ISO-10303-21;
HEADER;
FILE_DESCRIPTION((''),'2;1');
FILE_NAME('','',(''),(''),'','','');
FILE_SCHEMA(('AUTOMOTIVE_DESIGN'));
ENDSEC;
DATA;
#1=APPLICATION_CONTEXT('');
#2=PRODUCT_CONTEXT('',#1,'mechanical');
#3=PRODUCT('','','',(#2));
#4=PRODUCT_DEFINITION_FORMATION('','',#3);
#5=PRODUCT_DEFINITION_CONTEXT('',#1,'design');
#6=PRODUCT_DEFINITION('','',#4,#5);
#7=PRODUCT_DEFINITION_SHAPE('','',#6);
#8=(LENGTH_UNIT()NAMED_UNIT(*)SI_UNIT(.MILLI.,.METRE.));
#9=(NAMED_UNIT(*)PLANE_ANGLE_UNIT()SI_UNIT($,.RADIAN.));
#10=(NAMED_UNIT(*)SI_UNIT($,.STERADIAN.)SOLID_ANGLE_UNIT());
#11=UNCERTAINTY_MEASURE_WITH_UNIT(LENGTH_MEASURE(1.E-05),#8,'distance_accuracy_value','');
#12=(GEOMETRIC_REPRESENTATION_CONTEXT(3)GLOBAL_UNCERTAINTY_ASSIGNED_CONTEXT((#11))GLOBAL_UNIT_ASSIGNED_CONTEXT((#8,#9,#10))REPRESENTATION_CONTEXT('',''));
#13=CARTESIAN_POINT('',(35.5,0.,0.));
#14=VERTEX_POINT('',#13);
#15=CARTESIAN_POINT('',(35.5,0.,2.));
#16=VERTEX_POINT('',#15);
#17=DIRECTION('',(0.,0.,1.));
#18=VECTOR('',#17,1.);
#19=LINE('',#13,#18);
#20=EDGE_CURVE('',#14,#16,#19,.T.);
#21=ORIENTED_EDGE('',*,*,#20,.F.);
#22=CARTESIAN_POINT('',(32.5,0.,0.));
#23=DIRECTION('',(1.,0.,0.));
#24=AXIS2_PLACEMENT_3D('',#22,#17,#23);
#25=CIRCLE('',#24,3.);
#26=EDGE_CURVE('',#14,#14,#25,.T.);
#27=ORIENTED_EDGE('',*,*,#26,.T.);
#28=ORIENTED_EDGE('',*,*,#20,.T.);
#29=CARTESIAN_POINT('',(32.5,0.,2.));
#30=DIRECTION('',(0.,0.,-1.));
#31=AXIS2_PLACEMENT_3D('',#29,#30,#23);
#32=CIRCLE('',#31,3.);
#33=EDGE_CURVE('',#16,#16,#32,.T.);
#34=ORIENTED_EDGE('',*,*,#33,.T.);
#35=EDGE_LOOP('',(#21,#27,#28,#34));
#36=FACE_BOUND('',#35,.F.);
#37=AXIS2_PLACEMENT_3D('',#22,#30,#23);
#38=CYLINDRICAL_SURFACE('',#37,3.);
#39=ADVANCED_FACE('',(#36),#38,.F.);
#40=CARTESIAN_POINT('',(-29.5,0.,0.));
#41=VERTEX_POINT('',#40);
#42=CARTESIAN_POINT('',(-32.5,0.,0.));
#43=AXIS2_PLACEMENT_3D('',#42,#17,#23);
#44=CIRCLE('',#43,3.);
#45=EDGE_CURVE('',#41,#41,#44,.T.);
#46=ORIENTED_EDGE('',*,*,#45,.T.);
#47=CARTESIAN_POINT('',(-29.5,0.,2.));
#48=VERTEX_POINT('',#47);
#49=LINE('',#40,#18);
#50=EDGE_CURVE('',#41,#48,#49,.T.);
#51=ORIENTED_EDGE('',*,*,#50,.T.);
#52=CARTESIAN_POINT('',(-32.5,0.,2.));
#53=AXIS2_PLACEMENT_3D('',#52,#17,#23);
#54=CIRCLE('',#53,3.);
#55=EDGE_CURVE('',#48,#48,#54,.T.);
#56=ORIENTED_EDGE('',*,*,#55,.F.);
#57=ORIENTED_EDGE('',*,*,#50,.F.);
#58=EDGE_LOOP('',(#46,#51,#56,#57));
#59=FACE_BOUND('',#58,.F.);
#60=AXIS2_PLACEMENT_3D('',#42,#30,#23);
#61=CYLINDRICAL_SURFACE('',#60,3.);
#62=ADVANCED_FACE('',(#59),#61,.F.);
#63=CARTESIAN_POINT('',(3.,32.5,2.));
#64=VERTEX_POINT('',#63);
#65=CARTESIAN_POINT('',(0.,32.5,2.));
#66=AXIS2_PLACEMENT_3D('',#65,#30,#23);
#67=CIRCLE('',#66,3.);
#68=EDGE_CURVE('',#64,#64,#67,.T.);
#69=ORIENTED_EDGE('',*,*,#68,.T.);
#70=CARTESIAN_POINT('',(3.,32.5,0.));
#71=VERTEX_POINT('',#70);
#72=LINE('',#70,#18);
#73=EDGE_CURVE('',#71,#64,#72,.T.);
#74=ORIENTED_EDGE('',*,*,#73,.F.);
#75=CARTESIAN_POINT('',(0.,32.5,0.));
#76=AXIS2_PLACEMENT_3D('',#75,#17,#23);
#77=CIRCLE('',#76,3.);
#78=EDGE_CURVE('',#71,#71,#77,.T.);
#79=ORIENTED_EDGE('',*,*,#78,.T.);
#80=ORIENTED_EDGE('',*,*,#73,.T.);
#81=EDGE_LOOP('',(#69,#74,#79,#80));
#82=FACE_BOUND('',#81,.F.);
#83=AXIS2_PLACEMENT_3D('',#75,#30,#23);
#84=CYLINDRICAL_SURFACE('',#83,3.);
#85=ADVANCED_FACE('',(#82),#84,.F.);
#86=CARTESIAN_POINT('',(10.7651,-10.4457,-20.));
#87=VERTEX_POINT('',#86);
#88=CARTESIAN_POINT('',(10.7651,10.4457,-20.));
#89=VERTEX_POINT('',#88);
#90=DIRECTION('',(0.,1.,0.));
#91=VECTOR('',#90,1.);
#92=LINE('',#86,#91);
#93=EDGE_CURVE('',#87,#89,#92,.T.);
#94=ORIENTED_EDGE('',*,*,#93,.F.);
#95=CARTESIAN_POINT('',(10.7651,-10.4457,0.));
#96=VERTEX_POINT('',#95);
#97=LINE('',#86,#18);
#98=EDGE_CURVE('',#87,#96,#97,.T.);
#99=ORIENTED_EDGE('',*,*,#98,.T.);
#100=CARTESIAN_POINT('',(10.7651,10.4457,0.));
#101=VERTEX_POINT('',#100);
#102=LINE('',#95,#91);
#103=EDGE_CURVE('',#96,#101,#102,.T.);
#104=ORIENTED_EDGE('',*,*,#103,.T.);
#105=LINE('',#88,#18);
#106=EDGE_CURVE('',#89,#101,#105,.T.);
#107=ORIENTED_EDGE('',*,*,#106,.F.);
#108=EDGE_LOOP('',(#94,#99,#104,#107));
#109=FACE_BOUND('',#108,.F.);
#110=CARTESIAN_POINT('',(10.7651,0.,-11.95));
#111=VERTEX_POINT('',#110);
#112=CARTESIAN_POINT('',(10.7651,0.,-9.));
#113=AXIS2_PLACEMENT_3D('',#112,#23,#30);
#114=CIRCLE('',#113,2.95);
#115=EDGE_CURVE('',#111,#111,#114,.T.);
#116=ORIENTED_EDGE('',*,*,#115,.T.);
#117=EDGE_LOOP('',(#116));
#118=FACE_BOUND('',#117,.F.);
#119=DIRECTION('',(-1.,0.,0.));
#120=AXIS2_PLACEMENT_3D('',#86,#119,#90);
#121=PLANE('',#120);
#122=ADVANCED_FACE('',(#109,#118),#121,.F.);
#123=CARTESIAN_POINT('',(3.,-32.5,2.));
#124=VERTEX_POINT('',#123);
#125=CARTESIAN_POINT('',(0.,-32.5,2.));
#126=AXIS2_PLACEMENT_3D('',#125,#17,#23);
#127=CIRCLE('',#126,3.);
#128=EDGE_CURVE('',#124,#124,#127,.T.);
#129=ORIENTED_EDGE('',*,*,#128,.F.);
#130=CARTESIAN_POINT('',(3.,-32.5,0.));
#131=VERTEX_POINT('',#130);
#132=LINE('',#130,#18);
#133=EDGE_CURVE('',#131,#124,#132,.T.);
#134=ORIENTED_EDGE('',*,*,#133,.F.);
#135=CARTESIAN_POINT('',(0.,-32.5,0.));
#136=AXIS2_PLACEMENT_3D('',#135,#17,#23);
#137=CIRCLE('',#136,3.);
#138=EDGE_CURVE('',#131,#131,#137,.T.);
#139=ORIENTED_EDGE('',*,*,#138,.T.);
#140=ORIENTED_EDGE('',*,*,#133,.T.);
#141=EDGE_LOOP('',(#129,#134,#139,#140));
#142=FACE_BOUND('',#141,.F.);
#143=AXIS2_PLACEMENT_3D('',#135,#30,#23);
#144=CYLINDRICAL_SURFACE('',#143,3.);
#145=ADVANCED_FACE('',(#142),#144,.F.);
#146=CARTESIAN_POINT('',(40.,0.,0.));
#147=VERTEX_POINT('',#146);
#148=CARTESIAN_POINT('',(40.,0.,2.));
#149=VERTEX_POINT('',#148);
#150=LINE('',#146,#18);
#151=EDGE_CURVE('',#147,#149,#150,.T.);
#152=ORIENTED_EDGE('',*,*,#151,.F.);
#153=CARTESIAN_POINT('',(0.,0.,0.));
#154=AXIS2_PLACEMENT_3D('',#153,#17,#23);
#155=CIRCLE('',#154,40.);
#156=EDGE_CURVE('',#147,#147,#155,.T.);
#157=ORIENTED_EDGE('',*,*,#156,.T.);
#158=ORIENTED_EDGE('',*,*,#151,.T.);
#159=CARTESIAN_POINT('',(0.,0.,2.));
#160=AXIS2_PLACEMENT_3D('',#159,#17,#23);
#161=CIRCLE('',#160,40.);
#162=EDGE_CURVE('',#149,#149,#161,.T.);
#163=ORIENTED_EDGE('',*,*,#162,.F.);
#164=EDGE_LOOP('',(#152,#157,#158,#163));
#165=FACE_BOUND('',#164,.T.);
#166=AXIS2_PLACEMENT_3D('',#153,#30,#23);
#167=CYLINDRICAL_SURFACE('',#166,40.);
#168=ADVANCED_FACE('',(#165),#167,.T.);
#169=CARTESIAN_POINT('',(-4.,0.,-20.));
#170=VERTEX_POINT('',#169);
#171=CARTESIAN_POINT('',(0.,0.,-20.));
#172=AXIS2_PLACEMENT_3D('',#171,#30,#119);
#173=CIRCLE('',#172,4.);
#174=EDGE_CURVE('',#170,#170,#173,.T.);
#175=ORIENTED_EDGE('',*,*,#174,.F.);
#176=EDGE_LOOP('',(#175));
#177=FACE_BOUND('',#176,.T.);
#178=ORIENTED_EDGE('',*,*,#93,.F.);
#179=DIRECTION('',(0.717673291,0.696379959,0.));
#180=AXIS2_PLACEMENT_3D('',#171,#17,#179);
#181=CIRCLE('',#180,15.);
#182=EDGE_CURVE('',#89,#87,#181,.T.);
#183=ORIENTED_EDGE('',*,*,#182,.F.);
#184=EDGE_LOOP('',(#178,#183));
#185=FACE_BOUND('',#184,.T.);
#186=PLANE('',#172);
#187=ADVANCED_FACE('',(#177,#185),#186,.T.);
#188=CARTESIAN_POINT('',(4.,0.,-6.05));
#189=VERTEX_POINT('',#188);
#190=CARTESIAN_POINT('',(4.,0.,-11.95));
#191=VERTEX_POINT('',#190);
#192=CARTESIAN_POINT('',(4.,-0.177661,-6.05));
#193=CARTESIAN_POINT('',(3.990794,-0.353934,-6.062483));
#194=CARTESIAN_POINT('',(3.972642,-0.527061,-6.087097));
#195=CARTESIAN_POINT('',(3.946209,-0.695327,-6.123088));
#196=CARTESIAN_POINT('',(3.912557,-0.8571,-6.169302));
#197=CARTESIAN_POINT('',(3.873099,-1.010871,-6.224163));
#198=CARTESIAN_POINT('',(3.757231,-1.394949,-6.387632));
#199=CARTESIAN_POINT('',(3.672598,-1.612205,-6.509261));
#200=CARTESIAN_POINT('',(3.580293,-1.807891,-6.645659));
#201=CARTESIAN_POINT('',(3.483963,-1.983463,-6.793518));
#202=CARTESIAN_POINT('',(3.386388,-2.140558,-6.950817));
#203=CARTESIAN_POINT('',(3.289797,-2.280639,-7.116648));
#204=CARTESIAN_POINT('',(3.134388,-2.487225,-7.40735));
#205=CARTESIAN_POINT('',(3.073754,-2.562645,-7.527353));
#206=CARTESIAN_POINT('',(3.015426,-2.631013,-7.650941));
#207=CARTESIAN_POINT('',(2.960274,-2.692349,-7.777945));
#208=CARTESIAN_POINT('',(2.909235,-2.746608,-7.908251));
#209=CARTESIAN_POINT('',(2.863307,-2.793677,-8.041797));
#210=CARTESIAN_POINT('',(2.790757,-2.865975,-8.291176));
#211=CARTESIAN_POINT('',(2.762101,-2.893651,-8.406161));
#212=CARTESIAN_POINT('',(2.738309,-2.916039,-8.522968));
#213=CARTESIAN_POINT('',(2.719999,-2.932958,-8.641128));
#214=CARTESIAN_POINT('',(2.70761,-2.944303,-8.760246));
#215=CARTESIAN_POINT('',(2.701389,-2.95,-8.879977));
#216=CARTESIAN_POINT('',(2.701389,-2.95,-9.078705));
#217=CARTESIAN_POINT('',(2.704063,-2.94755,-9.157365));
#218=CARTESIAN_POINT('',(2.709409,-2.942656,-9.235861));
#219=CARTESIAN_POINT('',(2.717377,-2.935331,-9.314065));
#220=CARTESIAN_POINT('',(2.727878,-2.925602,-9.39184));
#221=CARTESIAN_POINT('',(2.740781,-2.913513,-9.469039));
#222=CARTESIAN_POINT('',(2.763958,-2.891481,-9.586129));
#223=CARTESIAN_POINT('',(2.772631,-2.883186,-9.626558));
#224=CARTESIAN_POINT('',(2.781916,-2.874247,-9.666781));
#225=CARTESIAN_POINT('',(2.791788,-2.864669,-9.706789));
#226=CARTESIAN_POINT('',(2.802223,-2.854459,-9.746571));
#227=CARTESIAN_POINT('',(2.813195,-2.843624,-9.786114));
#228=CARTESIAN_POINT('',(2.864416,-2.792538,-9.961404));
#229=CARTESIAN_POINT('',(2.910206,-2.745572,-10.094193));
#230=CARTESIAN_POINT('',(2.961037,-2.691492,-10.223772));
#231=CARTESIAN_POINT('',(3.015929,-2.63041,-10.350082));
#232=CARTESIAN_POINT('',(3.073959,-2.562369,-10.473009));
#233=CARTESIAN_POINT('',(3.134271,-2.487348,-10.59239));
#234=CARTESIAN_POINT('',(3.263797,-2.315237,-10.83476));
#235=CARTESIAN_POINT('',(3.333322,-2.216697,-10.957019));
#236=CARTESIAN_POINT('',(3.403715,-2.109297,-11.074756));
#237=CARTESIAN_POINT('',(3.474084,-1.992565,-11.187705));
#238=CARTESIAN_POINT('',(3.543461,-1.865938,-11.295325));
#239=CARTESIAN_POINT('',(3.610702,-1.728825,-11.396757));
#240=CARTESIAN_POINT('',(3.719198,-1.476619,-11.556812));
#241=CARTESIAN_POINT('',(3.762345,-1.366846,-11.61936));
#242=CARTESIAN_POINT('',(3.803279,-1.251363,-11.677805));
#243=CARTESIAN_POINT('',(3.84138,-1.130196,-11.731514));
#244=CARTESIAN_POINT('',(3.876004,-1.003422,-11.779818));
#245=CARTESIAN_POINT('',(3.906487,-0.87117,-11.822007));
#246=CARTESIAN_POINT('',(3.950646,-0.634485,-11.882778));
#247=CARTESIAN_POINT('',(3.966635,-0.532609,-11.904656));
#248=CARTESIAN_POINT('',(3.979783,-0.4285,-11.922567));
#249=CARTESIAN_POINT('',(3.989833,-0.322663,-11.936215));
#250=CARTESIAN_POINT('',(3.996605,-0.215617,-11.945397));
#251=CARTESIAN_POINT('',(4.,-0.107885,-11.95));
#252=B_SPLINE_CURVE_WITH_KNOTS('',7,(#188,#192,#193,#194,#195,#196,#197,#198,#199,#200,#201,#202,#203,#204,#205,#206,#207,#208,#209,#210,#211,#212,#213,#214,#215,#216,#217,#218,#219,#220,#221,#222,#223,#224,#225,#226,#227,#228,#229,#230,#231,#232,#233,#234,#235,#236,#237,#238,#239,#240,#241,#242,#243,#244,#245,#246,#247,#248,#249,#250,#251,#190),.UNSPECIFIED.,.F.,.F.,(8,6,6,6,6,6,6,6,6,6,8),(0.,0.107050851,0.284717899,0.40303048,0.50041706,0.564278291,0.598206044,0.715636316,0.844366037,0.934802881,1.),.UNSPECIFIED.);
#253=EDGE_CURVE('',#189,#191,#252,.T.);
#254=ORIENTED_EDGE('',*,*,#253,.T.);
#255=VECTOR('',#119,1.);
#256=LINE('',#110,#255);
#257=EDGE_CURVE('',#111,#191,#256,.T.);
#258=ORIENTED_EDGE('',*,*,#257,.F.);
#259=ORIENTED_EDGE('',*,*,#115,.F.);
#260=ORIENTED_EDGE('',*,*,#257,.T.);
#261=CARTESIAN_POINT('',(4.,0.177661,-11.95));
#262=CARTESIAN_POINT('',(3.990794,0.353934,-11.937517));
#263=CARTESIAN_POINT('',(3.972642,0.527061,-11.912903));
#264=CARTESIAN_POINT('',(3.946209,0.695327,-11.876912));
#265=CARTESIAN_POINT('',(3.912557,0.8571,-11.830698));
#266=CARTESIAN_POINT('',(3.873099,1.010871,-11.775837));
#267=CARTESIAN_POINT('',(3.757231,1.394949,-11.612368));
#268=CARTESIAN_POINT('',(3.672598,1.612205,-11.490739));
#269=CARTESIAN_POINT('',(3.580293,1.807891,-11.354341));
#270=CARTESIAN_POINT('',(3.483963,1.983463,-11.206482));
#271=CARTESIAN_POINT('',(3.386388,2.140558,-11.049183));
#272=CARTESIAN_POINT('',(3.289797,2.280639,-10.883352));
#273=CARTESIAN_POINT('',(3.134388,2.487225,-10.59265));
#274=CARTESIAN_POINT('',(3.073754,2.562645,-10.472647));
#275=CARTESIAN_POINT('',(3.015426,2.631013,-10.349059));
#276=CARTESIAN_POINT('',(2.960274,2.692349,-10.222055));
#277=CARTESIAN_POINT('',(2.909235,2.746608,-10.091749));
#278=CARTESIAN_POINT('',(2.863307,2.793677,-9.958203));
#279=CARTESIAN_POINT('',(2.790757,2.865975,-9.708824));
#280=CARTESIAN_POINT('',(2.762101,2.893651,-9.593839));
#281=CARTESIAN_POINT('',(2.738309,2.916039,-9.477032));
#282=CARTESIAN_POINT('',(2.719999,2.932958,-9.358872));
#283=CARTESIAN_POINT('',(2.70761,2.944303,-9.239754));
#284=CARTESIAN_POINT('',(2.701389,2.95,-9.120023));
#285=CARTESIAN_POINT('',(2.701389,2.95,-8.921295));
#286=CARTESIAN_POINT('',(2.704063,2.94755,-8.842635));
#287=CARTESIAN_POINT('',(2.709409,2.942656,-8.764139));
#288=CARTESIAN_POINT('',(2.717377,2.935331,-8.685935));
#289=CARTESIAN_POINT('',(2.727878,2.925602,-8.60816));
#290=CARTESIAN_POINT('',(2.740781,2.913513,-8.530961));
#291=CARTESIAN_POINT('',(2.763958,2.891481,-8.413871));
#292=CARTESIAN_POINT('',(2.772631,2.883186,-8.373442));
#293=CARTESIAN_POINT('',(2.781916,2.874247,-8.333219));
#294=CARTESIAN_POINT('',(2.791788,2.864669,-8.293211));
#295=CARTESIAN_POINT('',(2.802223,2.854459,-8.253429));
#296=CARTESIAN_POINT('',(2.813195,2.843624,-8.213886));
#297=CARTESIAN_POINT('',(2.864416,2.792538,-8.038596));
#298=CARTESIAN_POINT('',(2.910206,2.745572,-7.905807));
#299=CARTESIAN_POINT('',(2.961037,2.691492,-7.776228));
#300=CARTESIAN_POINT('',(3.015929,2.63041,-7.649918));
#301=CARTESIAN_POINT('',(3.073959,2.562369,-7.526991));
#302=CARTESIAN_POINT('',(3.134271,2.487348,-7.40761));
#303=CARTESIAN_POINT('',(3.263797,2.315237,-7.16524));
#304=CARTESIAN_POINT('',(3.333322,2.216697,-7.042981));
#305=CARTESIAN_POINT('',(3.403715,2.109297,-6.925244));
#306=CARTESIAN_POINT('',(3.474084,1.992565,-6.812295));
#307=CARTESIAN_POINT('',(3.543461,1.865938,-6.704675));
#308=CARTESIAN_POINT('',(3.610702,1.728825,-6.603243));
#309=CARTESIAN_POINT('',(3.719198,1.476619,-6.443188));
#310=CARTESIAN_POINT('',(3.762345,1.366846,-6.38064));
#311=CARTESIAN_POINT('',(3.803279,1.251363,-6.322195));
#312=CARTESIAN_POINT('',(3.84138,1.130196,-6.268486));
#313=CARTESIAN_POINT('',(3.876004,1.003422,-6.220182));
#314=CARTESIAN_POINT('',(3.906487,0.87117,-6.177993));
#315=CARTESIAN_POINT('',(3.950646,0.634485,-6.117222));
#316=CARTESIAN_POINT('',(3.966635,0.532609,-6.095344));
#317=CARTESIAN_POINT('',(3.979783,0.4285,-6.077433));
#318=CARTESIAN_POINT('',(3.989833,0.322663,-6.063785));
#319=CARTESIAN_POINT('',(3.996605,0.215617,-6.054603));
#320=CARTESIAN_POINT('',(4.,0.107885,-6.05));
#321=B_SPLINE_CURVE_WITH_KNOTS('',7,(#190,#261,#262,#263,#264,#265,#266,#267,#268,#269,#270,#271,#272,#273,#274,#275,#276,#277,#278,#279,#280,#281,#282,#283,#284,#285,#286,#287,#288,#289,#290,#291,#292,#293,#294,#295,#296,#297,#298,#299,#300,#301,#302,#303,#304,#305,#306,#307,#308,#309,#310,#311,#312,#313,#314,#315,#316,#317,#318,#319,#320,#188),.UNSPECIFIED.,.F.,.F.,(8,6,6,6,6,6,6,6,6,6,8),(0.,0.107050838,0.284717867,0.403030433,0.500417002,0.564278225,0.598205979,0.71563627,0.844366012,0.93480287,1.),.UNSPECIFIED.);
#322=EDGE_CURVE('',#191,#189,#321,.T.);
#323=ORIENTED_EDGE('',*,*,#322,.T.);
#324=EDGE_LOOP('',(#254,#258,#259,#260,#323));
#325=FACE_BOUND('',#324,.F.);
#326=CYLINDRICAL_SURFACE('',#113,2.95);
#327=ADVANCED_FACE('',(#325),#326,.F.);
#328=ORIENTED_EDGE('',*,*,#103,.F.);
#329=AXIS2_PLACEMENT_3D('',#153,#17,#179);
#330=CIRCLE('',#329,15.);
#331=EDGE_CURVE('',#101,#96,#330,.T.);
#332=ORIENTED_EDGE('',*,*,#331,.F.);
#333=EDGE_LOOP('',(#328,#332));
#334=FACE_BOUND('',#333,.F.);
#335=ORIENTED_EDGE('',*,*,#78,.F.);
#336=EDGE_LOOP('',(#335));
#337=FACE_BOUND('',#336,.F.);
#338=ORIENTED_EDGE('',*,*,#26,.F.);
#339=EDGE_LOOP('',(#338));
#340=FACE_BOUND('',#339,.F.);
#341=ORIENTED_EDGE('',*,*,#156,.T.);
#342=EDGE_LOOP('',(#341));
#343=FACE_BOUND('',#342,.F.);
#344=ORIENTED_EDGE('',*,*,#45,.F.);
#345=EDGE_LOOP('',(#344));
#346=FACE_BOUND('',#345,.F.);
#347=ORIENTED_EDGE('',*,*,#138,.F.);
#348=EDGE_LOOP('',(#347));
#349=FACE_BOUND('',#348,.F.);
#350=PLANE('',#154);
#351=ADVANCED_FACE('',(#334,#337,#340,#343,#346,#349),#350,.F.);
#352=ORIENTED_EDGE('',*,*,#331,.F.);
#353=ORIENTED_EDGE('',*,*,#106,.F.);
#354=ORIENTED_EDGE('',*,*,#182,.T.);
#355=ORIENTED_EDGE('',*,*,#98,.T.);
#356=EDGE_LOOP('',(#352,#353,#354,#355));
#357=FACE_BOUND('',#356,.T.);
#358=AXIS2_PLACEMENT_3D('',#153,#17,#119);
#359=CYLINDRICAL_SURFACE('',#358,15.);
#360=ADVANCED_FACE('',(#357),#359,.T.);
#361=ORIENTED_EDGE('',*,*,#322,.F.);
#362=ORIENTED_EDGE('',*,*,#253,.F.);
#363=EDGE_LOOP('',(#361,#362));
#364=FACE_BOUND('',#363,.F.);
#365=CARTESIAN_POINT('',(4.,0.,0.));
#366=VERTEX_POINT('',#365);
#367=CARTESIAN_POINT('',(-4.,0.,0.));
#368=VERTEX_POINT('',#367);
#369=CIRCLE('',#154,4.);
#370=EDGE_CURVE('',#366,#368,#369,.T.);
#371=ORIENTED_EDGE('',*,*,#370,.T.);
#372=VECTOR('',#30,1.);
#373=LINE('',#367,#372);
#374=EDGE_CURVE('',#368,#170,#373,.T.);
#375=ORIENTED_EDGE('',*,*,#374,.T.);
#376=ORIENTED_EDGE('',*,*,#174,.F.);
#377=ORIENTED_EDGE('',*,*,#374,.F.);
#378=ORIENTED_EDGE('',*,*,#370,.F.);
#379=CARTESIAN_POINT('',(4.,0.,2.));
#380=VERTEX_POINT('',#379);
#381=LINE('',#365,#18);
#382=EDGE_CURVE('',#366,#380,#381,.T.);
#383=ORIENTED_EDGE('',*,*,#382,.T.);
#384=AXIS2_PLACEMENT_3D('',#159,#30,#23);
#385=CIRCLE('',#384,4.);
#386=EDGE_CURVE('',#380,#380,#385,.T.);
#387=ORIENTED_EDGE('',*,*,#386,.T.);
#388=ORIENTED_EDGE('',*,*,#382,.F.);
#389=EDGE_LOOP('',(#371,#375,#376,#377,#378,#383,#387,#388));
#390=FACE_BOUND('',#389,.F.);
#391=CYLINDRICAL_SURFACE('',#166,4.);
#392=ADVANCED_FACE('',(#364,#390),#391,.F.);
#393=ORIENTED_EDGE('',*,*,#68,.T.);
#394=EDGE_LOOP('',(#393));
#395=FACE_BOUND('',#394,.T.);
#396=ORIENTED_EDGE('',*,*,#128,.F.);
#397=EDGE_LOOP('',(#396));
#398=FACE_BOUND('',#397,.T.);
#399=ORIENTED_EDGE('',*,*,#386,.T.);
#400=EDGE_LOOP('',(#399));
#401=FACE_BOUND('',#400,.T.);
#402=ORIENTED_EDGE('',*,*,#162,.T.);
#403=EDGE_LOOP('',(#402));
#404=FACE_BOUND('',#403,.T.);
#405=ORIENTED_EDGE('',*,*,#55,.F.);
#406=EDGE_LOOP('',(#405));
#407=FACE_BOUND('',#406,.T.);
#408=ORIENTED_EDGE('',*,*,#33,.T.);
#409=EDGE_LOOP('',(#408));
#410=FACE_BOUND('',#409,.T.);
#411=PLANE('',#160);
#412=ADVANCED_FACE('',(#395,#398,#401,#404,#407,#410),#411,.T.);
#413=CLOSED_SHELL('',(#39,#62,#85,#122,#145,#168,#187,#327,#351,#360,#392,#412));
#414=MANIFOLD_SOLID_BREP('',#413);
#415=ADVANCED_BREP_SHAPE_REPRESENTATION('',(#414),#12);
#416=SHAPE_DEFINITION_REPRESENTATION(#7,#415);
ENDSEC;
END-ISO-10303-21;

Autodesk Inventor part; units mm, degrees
ref_plane "YZ Plane" through (0, 0, 0) normal (1, 0, 0) x (0, 1, 0)
ref_plane "XZ Plane" through (0, 0, 0) normal (0, 1, 0) x (-1, 0, 0)
ref_plane "XY Plane" through (0, 0, 0) normal (0, 0, 1) x (1, 0, 0)
sketch "Sketch1" plane through (0, 0, 0) normal (0, 0, 1) x (1, 0, 0)
  circle A0 centre (0, 0) radius 40
  line L0 (0, 0) -> (32.5, 0)
  line L1 (0, 0) -> (0, 32.5)
  circle A1 centre (0, 32.5) radius 3
  circle A2 centre (32.5, 0) radius 3
  circle A3 centre (0, -32.5) radius 3
  circle A4 centre (-32.5, 0) radius 3
  circle A5 centre (0, 0) radius 4
  dimension "d0" = 80
  dimension "d1" = 32.5
  dimension "d2" = 32.5
  dimension "d3" = 6
  dimension "d4" = 6
  dimension "d5" = 8
extrude "Extrusion1" add sketch "Sketch1" along normal blind 2
sketch "Sketch2" plane through (0, 0, 0) normal (0, 0, -1) x (-1, 0, 0)
  circle A0 centre (0, 0) radius 4 projected
  circle A1 centre (0, 0) radius 15
  dimension "d8" = 30
extrude "Extrusion2" add sketch "Sketch2" along normal blind 20
sketch "Sketch3" plane through (0, 0, -20) normal (0, 0, -1) x (-1, 0, 0)
  circle A0 centre (0, 0) radius 15 projected
  line L0 (-10.7651, -10.4457) -> (-10.7651, 10.4457)
  circle A1 centre (0, 0) radius 15
extrude "Extrusion3" cut sketch "Sketch3" against normal blind 20 contours L0 A0 picked at (-11.4387, 2.6145)
sketch "Sketch4" plane through (10.7651, -10.4457, -20) normal (1, 0, 0) x (0, 0, -1)
  circle A0 centre (-11, 10.4457) radius 2.95
  point P0 (-20, 10.4457)
  dimension "d13" = 5.9
extrude "Extrusion4" cut sketch "Sketch4" against normal blind 11.75
thread "Thread1" size "M6x1" class "6H" standard "ISO Metric profile" length 19.85
properties part number "Sprocket Adapter"
